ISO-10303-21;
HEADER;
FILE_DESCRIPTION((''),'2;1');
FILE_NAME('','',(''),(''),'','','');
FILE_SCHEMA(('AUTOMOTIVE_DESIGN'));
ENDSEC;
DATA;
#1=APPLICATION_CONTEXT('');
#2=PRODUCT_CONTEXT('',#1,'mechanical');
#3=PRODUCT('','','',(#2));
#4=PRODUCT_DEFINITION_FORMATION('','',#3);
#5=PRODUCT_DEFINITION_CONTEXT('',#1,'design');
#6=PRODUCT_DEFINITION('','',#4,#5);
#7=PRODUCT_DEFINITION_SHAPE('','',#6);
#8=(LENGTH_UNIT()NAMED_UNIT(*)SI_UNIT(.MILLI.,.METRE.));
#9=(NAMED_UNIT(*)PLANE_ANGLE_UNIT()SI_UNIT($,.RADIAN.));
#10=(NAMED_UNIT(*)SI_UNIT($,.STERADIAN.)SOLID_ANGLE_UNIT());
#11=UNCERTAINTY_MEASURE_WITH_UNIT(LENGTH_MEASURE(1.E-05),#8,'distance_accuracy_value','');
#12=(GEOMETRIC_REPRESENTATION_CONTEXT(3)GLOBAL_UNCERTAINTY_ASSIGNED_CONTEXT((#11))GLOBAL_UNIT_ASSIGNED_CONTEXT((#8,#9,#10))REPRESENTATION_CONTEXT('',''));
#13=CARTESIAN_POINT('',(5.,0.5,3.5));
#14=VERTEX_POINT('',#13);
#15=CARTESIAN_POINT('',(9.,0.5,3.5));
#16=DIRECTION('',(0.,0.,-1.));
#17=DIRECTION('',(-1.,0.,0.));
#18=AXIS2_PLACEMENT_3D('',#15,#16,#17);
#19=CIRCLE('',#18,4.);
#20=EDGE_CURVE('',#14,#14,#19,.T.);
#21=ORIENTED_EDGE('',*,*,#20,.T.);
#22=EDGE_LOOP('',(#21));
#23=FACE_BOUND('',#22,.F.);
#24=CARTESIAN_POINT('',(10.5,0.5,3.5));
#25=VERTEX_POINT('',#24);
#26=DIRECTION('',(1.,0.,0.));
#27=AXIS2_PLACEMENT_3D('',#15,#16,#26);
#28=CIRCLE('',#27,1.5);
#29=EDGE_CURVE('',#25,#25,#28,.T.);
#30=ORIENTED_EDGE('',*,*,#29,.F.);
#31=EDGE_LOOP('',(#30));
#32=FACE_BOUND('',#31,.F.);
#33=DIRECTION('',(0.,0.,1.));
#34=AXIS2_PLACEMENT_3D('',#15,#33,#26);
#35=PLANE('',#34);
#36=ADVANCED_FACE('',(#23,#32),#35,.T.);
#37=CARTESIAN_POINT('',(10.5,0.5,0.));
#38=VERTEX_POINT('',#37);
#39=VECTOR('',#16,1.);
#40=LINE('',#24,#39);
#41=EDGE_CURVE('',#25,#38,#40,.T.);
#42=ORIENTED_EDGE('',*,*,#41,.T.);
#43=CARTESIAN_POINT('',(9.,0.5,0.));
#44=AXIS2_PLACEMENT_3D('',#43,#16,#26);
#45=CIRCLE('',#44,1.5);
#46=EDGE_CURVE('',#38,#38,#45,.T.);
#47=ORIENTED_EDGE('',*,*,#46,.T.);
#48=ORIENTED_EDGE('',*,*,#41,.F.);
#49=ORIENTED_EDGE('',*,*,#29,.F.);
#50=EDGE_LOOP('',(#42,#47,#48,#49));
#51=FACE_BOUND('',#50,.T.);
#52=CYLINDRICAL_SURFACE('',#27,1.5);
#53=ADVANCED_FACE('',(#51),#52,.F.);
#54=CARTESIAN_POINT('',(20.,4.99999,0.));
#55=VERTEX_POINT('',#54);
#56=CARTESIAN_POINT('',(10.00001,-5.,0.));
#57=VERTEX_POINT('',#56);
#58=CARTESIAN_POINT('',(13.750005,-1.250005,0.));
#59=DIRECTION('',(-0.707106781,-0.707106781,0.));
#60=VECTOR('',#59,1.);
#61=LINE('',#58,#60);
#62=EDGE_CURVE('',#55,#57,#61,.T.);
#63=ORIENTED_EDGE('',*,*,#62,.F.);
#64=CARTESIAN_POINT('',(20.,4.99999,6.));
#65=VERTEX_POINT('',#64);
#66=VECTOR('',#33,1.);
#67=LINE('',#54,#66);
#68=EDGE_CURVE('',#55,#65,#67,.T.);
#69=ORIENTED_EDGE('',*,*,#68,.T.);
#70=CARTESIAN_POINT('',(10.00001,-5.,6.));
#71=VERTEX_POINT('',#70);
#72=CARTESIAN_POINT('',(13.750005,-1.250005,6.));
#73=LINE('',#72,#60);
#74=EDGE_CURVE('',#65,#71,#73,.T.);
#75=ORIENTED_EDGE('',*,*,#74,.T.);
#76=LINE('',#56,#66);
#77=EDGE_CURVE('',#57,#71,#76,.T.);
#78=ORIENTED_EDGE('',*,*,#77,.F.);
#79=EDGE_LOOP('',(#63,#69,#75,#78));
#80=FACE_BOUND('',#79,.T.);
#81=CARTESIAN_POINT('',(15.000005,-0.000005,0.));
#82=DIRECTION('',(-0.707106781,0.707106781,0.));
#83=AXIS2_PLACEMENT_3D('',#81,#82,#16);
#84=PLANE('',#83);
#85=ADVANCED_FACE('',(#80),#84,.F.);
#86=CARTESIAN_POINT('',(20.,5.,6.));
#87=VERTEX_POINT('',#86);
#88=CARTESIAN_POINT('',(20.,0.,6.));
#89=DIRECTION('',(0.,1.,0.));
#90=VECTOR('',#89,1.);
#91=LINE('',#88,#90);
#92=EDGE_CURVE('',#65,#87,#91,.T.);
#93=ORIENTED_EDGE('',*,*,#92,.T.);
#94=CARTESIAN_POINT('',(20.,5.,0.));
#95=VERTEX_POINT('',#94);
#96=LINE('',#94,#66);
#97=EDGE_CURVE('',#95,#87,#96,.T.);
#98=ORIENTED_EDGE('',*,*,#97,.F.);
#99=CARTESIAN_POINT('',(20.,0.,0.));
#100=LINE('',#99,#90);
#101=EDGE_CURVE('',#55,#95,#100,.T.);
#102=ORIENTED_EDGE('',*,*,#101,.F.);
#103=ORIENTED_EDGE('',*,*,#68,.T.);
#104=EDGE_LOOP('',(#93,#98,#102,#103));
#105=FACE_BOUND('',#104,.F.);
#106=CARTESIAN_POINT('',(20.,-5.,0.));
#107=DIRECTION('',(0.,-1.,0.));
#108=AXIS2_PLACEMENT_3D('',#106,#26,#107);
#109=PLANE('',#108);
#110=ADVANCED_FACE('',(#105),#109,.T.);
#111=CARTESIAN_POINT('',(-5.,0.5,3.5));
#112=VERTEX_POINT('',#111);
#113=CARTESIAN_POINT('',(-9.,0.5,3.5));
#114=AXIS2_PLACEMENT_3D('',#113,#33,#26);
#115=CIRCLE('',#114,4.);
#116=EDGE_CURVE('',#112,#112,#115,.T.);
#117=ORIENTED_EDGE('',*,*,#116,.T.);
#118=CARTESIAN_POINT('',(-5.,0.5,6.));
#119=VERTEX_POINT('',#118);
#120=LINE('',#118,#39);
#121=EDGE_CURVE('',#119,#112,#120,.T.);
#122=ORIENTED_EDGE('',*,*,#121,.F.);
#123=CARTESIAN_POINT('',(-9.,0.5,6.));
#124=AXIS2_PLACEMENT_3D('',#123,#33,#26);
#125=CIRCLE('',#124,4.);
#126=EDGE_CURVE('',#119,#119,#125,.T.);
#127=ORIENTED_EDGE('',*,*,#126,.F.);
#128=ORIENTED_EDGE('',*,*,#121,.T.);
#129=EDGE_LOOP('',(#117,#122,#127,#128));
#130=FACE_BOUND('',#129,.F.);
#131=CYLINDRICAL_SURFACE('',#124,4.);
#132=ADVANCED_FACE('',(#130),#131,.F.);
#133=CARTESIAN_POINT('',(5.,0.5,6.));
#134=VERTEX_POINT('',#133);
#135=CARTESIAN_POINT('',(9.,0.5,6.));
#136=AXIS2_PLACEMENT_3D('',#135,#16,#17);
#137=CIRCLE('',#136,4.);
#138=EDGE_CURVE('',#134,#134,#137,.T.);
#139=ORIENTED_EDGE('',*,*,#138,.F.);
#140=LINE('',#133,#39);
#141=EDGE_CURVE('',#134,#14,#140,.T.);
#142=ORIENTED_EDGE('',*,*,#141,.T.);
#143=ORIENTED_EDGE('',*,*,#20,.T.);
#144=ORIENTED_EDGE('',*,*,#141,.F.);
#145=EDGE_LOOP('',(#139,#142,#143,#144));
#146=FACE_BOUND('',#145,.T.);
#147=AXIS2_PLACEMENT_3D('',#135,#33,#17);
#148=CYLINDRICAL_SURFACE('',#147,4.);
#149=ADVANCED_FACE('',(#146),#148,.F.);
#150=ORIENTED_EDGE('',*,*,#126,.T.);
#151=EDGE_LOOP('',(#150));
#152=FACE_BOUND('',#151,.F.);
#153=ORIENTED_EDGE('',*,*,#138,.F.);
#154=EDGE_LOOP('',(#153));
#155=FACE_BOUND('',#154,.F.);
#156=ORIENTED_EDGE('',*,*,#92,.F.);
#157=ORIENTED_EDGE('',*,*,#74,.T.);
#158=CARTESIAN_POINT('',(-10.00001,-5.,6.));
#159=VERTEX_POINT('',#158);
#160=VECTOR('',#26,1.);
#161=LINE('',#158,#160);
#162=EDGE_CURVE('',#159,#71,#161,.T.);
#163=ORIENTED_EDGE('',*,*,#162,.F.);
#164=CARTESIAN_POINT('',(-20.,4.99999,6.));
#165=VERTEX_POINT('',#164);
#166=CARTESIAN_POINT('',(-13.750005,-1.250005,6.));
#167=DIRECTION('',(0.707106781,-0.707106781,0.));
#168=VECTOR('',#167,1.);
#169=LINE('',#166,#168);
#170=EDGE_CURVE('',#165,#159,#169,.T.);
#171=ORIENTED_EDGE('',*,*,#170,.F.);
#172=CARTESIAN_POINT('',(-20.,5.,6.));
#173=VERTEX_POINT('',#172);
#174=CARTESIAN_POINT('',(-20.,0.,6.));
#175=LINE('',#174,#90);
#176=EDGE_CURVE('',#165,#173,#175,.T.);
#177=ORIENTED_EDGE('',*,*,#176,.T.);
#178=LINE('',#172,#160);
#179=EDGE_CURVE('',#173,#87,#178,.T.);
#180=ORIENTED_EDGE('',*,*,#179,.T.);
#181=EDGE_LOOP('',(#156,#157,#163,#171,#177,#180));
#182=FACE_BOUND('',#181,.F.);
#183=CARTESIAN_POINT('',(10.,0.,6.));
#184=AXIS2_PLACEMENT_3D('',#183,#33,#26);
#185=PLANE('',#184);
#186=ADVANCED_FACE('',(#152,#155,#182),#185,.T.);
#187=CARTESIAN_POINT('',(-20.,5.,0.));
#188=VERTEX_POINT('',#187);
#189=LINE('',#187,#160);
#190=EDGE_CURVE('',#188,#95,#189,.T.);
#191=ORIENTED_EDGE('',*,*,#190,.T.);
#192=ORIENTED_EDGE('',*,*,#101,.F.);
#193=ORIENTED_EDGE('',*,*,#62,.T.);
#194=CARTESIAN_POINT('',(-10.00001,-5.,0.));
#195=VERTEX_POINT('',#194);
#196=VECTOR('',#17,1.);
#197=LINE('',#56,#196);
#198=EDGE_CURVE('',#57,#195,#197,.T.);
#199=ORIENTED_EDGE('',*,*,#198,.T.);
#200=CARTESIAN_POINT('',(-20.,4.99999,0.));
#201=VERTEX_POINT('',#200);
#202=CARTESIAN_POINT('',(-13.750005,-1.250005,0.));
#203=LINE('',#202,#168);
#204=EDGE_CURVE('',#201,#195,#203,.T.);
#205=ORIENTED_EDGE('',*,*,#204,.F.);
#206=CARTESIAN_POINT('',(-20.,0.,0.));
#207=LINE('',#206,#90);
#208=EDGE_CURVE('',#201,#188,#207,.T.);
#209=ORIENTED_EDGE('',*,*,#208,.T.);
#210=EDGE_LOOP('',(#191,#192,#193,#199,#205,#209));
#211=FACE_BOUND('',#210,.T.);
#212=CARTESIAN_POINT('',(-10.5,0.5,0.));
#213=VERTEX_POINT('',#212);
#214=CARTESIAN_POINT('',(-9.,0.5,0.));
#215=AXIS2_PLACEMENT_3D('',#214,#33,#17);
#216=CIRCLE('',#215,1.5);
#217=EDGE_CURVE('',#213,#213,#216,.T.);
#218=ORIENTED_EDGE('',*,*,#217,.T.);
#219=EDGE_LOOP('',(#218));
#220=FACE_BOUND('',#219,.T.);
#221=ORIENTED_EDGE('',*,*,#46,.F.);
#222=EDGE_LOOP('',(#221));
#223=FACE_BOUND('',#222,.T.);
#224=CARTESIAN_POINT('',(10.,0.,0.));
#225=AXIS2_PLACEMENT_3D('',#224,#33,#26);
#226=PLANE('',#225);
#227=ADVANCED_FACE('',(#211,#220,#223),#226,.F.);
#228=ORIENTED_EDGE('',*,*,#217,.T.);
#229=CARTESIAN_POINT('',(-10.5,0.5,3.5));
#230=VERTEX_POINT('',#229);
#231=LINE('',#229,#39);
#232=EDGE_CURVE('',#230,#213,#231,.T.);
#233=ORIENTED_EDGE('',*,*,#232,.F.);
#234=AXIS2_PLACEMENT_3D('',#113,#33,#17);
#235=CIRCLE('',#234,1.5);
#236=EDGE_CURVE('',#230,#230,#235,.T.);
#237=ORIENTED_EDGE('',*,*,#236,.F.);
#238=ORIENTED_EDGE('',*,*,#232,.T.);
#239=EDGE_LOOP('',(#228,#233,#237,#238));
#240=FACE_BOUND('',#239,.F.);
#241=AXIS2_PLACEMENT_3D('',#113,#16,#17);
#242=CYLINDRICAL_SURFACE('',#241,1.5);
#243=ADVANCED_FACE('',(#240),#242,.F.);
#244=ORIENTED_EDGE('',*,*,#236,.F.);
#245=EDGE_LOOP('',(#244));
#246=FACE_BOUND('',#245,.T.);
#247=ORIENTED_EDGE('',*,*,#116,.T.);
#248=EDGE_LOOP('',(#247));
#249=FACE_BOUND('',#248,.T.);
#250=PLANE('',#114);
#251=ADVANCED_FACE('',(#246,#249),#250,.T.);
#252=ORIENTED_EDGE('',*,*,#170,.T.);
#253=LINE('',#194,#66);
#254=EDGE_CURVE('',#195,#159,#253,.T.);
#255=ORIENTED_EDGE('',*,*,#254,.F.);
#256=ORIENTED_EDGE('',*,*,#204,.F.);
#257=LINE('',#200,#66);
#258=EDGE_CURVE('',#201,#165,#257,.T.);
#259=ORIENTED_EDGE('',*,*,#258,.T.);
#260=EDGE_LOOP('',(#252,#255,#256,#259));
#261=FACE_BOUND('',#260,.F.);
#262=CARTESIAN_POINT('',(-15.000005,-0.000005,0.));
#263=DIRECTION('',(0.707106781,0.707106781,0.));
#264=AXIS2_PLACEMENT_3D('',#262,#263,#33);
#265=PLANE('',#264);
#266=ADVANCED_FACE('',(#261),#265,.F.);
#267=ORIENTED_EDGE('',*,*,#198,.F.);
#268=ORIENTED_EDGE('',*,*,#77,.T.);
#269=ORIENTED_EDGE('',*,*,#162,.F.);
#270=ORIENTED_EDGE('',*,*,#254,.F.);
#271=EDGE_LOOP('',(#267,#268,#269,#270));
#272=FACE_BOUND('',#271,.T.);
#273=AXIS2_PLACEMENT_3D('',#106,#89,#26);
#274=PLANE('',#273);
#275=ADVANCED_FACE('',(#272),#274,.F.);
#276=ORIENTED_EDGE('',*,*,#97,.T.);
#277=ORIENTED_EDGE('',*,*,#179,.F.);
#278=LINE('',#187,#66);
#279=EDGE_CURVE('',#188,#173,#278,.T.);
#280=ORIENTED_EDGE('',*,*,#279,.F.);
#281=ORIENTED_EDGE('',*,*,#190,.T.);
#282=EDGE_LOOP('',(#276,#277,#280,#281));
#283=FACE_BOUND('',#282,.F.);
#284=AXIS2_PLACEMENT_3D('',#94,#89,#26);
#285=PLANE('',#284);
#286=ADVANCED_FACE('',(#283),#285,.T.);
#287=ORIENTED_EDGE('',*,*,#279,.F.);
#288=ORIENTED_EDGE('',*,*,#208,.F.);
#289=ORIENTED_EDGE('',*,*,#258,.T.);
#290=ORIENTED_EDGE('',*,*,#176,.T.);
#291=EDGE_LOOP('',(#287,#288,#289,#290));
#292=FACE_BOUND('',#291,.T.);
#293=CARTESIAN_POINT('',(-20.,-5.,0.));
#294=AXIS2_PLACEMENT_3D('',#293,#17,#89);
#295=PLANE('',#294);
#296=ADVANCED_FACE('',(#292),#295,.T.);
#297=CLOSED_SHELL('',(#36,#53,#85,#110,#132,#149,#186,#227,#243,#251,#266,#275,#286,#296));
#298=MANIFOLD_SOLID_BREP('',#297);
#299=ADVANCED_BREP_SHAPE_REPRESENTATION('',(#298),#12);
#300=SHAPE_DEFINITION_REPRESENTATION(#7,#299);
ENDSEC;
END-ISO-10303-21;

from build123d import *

# Parameters (mm, degrees)
F0_W           = 20
F0_H           = 10
F1_DEPTH       = 6
F2_SIZE        = 9.99999
F3_R           = 4
F4_DEPTH       = 2.5
F6_D           = 3
F6_DEPTH       = 10
F6_CBORE_D     = 3
F6_CBORE_DEPTH = 10
F6_TIP         = 0.9012909285


# Not quite as in the source:
# - a fillet or chamfer is up to 0.001 mm smaller than in the source, because OpenCascade refuses the exact size


with BuildPart() as f1:
    # F0 (on Top) → F1 (new body)
    with BuildSketch(Plane.XY):
        with Locations((-10, 0)):
            Rectangle(F0_W, F0_H)
    extrude(amount=F1_DEPTH)

    # F2 (size 10 in the source; OpenCascade refuses exactly that, so slightly less here)
    f2_edges = [f1.edges().sort_by_distance(p)[0] for p in [
        (-20, -5, 3),
    ]]
    chamfer(f2_edges, length=F2_SIZE)

    # F3 (on face) → F4 (cut)
    with BuildSketch(Plane.XY.offset(6)):
        with Locations((-9, 0.5)):
            Circle(F3_R)
    extrude(amount=-F4_DEPTH, mode=Mode.SUBTRACT)

    # F6
    with Locations(Plane.XY.offset(3.5)):
        with Locations((-9, 0.5)):
            CounterBoreHole(F6_D / 2, F6_CBORE_D / 2, F6_CBORE_DEPTH, depth=F6_DEPTH)
            with Locations((0, 0, -(F6_DEPTH + F6_TIP / 2))):  # 118° drill point
                Cone(0, F6_D / 2, F6_TIP, mode=Mode.SUBTRACT)

    # F7: F1 across plane


with BuildPart() as f1_1:
    add(f1.part)
    add(f1.part.mirror(Plane.YZ))


solid = f1_1.part
